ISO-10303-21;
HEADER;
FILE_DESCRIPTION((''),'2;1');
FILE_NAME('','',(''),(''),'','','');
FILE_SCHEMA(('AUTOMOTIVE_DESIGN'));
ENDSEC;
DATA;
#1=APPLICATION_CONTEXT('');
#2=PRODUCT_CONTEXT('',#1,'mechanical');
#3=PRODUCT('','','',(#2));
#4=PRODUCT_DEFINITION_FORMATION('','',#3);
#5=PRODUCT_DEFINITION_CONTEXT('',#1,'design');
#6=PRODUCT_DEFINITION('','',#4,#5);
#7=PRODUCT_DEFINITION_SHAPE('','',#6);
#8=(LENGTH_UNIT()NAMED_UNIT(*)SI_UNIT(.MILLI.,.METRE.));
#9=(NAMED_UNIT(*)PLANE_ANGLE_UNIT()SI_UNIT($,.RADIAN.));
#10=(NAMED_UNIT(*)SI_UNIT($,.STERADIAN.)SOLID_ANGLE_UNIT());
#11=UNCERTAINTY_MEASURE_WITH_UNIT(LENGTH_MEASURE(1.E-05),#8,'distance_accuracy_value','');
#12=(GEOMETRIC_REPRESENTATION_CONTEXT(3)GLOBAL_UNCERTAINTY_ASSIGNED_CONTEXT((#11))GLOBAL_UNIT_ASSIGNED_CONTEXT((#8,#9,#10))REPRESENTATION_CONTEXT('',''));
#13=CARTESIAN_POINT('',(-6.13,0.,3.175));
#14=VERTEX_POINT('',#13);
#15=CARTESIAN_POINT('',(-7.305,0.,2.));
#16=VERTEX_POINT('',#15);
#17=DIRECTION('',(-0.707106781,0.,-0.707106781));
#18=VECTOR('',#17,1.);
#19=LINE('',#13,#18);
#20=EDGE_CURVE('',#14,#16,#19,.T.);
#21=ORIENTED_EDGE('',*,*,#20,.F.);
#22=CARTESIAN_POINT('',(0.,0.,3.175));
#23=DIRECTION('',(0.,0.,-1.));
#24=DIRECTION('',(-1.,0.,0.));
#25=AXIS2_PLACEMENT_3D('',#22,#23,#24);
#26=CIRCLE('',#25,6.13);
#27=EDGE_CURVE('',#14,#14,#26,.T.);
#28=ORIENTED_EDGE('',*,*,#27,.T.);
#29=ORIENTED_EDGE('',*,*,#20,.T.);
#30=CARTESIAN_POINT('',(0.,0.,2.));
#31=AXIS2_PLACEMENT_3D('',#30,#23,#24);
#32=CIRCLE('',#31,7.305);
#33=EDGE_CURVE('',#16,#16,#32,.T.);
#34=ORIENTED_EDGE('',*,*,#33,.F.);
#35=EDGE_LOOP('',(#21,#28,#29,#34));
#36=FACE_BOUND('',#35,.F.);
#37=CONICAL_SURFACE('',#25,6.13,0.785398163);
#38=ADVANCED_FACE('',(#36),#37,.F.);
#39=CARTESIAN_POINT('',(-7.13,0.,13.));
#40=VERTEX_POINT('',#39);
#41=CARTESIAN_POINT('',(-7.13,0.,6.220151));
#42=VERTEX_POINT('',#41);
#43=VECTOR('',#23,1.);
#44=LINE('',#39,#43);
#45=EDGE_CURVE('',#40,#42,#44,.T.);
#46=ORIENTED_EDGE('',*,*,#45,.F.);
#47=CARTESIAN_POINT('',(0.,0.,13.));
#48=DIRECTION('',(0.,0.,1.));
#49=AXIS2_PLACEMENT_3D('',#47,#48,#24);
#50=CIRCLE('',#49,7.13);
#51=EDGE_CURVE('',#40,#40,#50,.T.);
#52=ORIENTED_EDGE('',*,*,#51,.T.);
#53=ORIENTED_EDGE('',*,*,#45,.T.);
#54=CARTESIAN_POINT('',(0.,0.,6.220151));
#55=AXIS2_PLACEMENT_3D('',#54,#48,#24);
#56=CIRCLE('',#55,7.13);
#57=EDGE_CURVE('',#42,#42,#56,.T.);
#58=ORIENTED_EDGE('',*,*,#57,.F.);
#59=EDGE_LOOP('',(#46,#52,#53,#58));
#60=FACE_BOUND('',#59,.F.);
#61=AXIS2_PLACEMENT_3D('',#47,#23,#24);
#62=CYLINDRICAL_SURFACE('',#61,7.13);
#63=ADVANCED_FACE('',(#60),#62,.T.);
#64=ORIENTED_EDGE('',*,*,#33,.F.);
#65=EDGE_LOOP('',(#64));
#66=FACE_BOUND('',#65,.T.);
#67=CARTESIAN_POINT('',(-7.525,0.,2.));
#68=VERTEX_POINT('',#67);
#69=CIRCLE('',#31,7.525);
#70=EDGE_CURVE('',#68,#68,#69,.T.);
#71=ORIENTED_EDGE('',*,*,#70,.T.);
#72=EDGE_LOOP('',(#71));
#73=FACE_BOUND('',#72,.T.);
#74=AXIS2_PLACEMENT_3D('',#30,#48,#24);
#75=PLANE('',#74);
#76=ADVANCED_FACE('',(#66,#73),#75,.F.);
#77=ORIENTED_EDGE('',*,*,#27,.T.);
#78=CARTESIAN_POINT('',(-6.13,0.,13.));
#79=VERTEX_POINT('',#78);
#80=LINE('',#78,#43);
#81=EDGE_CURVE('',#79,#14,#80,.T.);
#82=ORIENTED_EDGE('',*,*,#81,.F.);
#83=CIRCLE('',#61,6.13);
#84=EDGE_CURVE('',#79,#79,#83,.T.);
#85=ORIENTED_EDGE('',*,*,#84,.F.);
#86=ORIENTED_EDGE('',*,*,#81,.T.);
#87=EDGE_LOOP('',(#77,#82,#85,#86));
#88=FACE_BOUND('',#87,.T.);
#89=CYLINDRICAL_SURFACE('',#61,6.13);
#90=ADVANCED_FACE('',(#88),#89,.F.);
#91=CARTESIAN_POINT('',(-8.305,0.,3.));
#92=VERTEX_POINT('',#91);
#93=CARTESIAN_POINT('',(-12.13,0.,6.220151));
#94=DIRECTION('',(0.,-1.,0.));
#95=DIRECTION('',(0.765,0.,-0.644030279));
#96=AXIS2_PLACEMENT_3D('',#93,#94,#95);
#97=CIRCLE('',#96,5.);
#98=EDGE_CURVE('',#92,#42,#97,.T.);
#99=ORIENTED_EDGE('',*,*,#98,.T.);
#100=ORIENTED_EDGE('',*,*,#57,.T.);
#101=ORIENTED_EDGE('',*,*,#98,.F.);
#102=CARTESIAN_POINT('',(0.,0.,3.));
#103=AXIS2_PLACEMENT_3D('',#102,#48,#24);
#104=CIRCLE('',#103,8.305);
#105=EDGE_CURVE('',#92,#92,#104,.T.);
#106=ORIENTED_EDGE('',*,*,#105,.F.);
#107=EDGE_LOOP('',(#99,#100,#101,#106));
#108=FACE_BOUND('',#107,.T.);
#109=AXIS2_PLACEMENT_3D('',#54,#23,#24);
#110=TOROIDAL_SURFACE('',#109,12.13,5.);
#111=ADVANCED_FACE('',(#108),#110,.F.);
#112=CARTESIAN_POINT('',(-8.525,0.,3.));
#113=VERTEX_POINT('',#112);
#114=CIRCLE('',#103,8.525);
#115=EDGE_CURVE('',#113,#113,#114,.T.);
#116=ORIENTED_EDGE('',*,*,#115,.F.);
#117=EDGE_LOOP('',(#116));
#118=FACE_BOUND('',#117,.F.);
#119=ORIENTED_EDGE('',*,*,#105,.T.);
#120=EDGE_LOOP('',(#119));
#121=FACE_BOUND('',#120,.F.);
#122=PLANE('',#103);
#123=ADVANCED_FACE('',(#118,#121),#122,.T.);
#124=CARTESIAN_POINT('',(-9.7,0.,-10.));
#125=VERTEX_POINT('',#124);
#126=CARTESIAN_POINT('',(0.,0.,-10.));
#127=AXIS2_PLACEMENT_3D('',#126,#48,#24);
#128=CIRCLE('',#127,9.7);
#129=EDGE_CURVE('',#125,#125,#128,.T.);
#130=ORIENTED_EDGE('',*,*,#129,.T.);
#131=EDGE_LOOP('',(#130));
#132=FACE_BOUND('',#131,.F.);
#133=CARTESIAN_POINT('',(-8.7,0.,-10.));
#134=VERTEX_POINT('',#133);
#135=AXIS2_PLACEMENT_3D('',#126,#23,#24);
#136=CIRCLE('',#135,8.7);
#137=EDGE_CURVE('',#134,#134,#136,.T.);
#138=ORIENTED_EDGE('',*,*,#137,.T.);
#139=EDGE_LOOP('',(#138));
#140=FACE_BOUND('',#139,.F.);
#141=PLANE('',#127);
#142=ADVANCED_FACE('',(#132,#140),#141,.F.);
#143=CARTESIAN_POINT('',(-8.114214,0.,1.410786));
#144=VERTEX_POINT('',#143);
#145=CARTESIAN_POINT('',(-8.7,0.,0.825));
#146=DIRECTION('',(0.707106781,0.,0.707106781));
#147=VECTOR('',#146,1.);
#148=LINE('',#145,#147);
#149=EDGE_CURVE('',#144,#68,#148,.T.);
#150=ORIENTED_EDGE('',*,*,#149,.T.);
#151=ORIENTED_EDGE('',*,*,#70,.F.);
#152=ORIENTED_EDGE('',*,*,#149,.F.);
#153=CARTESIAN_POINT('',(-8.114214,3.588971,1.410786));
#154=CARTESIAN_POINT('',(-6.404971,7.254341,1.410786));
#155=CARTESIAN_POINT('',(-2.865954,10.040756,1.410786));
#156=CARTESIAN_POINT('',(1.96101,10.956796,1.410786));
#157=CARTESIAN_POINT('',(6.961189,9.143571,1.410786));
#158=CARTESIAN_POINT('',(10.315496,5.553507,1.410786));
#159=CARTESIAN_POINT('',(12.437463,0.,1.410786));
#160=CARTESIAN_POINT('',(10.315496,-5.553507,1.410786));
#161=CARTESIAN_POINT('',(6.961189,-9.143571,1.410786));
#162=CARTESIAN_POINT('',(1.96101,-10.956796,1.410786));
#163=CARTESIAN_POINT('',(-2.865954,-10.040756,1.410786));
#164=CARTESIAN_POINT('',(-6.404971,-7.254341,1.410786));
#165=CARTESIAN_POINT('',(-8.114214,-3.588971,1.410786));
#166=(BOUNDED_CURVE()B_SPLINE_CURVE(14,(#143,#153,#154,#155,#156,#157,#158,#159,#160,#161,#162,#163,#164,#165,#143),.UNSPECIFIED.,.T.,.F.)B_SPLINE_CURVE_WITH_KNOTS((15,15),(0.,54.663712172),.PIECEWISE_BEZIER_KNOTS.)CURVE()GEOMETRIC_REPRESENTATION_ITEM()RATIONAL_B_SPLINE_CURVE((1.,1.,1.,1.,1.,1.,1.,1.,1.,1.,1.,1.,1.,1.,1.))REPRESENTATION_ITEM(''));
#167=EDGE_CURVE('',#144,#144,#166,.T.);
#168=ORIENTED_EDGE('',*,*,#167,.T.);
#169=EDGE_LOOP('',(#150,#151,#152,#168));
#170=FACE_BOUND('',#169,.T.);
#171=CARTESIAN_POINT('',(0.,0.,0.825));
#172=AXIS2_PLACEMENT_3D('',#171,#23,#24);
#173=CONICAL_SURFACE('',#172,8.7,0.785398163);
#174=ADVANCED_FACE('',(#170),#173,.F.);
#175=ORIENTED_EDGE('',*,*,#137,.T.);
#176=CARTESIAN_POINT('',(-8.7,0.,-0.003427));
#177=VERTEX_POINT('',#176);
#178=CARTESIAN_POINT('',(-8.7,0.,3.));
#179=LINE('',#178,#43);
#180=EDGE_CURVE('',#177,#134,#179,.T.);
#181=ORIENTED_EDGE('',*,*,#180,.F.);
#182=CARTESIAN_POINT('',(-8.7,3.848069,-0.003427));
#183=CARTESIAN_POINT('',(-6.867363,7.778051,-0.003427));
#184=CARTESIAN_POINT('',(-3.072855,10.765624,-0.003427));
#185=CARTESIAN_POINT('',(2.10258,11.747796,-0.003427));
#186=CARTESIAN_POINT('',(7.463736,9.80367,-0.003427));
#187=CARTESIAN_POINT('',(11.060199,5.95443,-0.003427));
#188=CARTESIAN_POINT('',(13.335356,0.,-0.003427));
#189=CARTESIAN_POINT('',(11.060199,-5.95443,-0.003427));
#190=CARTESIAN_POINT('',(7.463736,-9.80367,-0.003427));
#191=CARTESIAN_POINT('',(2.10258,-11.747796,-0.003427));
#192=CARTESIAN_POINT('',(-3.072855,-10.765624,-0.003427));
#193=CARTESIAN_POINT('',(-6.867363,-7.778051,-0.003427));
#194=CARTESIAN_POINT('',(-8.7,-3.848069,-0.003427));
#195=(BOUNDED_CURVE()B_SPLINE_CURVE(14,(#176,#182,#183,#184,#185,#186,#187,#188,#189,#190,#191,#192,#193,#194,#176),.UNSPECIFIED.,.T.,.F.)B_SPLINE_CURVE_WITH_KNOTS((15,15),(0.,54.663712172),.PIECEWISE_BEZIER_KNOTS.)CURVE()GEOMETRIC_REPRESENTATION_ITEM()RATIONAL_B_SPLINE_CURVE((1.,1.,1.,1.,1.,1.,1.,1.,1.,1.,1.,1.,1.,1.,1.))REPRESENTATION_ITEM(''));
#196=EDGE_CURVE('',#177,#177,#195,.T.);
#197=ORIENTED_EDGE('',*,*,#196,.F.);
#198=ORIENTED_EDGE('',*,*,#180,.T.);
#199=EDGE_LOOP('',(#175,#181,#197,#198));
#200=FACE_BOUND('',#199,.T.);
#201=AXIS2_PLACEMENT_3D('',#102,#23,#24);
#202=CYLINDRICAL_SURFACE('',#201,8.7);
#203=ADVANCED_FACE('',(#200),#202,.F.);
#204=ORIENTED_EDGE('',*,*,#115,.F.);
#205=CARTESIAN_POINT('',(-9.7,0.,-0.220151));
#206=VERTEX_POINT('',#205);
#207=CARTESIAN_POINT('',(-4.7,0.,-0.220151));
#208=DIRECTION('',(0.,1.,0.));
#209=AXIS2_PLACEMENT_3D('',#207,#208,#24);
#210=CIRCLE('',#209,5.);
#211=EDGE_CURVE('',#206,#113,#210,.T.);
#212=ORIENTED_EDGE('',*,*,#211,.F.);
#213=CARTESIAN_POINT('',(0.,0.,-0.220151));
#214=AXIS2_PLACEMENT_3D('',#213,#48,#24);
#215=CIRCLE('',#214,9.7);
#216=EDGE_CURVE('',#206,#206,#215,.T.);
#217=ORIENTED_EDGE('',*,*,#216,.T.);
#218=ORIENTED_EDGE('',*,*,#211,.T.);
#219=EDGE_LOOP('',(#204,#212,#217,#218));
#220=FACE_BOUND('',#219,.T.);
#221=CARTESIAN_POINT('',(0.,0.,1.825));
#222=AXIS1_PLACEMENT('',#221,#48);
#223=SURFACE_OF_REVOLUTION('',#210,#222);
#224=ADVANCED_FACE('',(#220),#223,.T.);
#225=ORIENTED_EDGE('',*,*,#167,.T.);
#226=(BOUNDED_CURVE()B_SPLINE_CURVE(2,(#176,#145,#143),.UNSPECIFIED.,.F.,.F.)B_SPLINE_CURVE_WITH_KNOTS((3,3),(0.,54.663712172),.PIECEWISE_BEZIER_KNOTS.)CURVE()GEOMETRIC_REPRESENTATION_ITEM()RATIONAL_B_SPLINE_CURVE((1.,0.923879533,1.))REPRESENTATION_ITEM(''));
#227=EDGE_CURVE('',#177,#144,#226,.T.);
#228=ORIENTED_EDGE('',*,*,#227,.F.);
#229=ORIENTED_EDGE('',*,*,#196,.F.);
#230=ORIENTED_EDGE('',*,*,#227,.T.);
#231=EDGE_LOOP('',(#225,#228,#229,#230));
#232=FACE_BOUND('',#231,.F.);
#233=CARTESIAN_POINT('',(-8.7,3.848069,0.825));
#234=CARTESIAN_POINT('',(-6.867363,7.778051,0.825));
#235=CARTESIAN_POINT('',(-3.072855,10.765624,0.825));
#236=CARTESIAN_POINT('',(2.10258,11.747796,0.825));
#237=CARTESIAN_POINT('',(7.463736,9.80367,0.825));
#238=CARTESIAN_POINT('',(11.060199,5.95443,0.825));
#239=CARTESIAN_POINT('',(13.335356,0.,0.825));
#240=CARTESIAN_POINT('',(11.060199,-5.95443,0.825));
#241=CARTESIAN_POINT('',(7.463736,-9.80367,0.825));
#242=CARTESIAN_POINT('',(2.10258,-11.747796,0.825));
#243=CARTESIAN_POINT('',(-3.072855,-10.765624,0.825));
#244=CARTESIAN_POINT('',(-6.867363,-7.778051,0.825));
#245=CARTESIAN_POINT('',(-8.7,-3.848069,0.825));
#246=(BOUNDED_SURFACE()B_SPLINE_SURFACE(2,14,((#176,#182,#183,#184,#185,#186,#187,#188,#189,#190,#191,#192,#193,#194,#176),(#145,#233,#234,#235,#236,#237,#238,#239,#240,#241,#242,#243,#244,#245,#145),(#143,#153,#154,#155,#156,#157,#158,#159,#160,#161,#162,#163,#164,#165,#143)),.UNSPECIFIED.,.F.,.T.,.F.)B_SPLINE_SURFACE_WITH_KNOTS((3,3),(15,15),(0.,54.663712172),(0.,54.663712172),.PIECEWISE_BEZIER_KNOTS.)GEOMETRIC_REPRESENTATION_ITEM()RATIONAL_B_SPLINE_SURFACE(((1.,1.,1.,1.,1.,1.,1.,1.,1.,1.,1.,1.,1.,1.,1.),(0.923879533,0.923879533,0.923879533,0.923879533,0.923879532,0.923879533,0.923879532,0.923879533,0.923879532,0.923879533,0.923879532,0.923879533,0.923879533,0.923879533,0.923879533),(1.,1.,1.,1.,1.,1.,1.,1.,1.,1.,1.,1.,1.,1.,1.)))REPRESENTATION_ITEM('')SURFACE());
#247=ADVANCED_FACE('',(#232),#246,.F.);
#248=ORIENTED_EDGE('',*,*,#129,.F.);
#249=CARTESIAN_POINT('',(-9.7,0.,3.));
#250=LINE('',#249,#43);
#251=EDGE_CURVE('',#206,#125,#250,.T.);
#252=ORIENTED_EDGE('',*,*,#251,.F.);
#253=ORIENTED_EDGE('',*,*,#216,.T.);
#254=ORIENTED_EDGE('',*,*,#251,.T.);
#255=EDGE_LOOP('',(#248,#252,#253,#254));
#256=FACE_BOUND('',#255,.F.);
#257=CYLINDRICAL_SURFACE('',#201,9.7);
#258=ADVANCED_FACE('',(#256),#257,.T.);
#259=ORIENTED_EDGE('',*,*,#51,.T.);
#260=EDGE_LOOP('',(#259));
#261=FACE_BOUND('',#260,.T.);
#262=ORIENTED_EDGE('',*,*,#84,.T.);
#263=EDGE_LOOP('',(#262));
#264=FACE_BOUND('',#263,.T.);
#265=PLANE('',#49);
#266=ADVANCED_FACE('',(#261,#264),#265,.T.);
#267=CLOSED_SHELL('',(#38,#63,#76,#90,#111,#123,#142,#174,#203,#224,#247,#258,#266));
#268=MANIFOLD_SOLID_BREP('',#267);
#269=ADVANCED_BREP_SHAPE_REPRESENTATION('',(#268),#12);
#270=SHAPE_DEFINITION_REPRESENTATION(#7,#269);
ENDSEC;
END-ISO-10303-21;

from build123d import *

# Parameters (mm, degrees)
F0_W    = 7.13
F0_H    = 10
F0_H_2  = 3
F2_T    = -1
F3_SIZE = 1.175
F4_SIZE = 1.175
F5_R    = 2


# Not quite as in the source:
# - a fillet or chamfer that OpenCascade refuses, or shapes differently, is made with other operations: its cross-section is extruded or revolved along the edge and cut away or added


with BuildPart() as f1:
    # F0 (on Front) → F1 (revolve)
    with BuildSketch(Plane.XZ):
        with Locations((-3.565, 8)):
            Rectangle(F0_W, F0_H)
        with Locations((-3.565, 1.5)):
            Rectangle(F0_W, F0_H_2)
        Polygon((0, -10), (0, 0), (-7.13, 0), (-7.13, 3), (-9.7, 3), (-9.7, -10), align=None)
    revolve(axis=Axis((0, 0, 6.5), (0, 0, 1)))

    # F2
    f2_openings = [f1.faces().sort_by_distance(p)[0] for p in [
        (0, 0, 13),
        (0, 0, -10),
    ]]
    offset(amount=F2_T, openings=f2_openings, kind=Kind.INTERSECTION)

    # F3
    f3_edges = [f1.edges().sort_by_distance(p)[0] for p in [
        (6.13, 0, 2),
        (-6.13, 0, 7.5),
        (8.7, 0, 2),
    ]]
    chamfer(f3_edges, length=F3_SIZE)

    # F4
    f4_edges = [f1.edges().sort_by_distance(p)[0] for p in [
        (9.7, 0, 3),
        (7.13, 0, 3),
    ]]
    chamfer(f4_edges, length=F4_SIZE)

    # F5
    f5_edges = [f1.edges().sort_by_distance(p)[0] for p in [
        (8.7, 0, 0.825),
    ]]
    fillet(f5_edges, radius=F5_R)

    # F6: fillet of radius 5 on 1 edges, made by hand

    # F6_s1 → F6_t2 (revolve)
    with BuildSketch(Plane.XZ):
        with BuildLine():
            ThreePointArc((-8.305, 3), (-7.432926443, 4.5062377439), (-7.13, 6.220151394))
            Line((-7.13, 6.220151394), (-7.13, 4.175))
            Line((-7.13, 4.175), (-8.305, 3))
        make_face()
    revolve(axis=Axis((0, 0, 4.175), (0, 0, 1)))

    # F7: fillet of radius 5 on 1 edges, made by hand

    # F7_s1 → F7_t2 (revolve, cut)
    with BuildSketch(Plane.XZ):
        with BuildLine():
            ThreePointArc((-9.7, -0.220151394), (-9.397073557, 1.4937622561), (-8.525, 3))
            Line((-8.525, 3), (-9.7, 1.825))
            Line((-9.7, 1.825), (-9.7, -0.220151394))
        make_face()
    revolve(axis=Axis((0, 0, 1.825), (0, 0, 1)), mode=Mode.SUBTRACT)


solid = f1.part
